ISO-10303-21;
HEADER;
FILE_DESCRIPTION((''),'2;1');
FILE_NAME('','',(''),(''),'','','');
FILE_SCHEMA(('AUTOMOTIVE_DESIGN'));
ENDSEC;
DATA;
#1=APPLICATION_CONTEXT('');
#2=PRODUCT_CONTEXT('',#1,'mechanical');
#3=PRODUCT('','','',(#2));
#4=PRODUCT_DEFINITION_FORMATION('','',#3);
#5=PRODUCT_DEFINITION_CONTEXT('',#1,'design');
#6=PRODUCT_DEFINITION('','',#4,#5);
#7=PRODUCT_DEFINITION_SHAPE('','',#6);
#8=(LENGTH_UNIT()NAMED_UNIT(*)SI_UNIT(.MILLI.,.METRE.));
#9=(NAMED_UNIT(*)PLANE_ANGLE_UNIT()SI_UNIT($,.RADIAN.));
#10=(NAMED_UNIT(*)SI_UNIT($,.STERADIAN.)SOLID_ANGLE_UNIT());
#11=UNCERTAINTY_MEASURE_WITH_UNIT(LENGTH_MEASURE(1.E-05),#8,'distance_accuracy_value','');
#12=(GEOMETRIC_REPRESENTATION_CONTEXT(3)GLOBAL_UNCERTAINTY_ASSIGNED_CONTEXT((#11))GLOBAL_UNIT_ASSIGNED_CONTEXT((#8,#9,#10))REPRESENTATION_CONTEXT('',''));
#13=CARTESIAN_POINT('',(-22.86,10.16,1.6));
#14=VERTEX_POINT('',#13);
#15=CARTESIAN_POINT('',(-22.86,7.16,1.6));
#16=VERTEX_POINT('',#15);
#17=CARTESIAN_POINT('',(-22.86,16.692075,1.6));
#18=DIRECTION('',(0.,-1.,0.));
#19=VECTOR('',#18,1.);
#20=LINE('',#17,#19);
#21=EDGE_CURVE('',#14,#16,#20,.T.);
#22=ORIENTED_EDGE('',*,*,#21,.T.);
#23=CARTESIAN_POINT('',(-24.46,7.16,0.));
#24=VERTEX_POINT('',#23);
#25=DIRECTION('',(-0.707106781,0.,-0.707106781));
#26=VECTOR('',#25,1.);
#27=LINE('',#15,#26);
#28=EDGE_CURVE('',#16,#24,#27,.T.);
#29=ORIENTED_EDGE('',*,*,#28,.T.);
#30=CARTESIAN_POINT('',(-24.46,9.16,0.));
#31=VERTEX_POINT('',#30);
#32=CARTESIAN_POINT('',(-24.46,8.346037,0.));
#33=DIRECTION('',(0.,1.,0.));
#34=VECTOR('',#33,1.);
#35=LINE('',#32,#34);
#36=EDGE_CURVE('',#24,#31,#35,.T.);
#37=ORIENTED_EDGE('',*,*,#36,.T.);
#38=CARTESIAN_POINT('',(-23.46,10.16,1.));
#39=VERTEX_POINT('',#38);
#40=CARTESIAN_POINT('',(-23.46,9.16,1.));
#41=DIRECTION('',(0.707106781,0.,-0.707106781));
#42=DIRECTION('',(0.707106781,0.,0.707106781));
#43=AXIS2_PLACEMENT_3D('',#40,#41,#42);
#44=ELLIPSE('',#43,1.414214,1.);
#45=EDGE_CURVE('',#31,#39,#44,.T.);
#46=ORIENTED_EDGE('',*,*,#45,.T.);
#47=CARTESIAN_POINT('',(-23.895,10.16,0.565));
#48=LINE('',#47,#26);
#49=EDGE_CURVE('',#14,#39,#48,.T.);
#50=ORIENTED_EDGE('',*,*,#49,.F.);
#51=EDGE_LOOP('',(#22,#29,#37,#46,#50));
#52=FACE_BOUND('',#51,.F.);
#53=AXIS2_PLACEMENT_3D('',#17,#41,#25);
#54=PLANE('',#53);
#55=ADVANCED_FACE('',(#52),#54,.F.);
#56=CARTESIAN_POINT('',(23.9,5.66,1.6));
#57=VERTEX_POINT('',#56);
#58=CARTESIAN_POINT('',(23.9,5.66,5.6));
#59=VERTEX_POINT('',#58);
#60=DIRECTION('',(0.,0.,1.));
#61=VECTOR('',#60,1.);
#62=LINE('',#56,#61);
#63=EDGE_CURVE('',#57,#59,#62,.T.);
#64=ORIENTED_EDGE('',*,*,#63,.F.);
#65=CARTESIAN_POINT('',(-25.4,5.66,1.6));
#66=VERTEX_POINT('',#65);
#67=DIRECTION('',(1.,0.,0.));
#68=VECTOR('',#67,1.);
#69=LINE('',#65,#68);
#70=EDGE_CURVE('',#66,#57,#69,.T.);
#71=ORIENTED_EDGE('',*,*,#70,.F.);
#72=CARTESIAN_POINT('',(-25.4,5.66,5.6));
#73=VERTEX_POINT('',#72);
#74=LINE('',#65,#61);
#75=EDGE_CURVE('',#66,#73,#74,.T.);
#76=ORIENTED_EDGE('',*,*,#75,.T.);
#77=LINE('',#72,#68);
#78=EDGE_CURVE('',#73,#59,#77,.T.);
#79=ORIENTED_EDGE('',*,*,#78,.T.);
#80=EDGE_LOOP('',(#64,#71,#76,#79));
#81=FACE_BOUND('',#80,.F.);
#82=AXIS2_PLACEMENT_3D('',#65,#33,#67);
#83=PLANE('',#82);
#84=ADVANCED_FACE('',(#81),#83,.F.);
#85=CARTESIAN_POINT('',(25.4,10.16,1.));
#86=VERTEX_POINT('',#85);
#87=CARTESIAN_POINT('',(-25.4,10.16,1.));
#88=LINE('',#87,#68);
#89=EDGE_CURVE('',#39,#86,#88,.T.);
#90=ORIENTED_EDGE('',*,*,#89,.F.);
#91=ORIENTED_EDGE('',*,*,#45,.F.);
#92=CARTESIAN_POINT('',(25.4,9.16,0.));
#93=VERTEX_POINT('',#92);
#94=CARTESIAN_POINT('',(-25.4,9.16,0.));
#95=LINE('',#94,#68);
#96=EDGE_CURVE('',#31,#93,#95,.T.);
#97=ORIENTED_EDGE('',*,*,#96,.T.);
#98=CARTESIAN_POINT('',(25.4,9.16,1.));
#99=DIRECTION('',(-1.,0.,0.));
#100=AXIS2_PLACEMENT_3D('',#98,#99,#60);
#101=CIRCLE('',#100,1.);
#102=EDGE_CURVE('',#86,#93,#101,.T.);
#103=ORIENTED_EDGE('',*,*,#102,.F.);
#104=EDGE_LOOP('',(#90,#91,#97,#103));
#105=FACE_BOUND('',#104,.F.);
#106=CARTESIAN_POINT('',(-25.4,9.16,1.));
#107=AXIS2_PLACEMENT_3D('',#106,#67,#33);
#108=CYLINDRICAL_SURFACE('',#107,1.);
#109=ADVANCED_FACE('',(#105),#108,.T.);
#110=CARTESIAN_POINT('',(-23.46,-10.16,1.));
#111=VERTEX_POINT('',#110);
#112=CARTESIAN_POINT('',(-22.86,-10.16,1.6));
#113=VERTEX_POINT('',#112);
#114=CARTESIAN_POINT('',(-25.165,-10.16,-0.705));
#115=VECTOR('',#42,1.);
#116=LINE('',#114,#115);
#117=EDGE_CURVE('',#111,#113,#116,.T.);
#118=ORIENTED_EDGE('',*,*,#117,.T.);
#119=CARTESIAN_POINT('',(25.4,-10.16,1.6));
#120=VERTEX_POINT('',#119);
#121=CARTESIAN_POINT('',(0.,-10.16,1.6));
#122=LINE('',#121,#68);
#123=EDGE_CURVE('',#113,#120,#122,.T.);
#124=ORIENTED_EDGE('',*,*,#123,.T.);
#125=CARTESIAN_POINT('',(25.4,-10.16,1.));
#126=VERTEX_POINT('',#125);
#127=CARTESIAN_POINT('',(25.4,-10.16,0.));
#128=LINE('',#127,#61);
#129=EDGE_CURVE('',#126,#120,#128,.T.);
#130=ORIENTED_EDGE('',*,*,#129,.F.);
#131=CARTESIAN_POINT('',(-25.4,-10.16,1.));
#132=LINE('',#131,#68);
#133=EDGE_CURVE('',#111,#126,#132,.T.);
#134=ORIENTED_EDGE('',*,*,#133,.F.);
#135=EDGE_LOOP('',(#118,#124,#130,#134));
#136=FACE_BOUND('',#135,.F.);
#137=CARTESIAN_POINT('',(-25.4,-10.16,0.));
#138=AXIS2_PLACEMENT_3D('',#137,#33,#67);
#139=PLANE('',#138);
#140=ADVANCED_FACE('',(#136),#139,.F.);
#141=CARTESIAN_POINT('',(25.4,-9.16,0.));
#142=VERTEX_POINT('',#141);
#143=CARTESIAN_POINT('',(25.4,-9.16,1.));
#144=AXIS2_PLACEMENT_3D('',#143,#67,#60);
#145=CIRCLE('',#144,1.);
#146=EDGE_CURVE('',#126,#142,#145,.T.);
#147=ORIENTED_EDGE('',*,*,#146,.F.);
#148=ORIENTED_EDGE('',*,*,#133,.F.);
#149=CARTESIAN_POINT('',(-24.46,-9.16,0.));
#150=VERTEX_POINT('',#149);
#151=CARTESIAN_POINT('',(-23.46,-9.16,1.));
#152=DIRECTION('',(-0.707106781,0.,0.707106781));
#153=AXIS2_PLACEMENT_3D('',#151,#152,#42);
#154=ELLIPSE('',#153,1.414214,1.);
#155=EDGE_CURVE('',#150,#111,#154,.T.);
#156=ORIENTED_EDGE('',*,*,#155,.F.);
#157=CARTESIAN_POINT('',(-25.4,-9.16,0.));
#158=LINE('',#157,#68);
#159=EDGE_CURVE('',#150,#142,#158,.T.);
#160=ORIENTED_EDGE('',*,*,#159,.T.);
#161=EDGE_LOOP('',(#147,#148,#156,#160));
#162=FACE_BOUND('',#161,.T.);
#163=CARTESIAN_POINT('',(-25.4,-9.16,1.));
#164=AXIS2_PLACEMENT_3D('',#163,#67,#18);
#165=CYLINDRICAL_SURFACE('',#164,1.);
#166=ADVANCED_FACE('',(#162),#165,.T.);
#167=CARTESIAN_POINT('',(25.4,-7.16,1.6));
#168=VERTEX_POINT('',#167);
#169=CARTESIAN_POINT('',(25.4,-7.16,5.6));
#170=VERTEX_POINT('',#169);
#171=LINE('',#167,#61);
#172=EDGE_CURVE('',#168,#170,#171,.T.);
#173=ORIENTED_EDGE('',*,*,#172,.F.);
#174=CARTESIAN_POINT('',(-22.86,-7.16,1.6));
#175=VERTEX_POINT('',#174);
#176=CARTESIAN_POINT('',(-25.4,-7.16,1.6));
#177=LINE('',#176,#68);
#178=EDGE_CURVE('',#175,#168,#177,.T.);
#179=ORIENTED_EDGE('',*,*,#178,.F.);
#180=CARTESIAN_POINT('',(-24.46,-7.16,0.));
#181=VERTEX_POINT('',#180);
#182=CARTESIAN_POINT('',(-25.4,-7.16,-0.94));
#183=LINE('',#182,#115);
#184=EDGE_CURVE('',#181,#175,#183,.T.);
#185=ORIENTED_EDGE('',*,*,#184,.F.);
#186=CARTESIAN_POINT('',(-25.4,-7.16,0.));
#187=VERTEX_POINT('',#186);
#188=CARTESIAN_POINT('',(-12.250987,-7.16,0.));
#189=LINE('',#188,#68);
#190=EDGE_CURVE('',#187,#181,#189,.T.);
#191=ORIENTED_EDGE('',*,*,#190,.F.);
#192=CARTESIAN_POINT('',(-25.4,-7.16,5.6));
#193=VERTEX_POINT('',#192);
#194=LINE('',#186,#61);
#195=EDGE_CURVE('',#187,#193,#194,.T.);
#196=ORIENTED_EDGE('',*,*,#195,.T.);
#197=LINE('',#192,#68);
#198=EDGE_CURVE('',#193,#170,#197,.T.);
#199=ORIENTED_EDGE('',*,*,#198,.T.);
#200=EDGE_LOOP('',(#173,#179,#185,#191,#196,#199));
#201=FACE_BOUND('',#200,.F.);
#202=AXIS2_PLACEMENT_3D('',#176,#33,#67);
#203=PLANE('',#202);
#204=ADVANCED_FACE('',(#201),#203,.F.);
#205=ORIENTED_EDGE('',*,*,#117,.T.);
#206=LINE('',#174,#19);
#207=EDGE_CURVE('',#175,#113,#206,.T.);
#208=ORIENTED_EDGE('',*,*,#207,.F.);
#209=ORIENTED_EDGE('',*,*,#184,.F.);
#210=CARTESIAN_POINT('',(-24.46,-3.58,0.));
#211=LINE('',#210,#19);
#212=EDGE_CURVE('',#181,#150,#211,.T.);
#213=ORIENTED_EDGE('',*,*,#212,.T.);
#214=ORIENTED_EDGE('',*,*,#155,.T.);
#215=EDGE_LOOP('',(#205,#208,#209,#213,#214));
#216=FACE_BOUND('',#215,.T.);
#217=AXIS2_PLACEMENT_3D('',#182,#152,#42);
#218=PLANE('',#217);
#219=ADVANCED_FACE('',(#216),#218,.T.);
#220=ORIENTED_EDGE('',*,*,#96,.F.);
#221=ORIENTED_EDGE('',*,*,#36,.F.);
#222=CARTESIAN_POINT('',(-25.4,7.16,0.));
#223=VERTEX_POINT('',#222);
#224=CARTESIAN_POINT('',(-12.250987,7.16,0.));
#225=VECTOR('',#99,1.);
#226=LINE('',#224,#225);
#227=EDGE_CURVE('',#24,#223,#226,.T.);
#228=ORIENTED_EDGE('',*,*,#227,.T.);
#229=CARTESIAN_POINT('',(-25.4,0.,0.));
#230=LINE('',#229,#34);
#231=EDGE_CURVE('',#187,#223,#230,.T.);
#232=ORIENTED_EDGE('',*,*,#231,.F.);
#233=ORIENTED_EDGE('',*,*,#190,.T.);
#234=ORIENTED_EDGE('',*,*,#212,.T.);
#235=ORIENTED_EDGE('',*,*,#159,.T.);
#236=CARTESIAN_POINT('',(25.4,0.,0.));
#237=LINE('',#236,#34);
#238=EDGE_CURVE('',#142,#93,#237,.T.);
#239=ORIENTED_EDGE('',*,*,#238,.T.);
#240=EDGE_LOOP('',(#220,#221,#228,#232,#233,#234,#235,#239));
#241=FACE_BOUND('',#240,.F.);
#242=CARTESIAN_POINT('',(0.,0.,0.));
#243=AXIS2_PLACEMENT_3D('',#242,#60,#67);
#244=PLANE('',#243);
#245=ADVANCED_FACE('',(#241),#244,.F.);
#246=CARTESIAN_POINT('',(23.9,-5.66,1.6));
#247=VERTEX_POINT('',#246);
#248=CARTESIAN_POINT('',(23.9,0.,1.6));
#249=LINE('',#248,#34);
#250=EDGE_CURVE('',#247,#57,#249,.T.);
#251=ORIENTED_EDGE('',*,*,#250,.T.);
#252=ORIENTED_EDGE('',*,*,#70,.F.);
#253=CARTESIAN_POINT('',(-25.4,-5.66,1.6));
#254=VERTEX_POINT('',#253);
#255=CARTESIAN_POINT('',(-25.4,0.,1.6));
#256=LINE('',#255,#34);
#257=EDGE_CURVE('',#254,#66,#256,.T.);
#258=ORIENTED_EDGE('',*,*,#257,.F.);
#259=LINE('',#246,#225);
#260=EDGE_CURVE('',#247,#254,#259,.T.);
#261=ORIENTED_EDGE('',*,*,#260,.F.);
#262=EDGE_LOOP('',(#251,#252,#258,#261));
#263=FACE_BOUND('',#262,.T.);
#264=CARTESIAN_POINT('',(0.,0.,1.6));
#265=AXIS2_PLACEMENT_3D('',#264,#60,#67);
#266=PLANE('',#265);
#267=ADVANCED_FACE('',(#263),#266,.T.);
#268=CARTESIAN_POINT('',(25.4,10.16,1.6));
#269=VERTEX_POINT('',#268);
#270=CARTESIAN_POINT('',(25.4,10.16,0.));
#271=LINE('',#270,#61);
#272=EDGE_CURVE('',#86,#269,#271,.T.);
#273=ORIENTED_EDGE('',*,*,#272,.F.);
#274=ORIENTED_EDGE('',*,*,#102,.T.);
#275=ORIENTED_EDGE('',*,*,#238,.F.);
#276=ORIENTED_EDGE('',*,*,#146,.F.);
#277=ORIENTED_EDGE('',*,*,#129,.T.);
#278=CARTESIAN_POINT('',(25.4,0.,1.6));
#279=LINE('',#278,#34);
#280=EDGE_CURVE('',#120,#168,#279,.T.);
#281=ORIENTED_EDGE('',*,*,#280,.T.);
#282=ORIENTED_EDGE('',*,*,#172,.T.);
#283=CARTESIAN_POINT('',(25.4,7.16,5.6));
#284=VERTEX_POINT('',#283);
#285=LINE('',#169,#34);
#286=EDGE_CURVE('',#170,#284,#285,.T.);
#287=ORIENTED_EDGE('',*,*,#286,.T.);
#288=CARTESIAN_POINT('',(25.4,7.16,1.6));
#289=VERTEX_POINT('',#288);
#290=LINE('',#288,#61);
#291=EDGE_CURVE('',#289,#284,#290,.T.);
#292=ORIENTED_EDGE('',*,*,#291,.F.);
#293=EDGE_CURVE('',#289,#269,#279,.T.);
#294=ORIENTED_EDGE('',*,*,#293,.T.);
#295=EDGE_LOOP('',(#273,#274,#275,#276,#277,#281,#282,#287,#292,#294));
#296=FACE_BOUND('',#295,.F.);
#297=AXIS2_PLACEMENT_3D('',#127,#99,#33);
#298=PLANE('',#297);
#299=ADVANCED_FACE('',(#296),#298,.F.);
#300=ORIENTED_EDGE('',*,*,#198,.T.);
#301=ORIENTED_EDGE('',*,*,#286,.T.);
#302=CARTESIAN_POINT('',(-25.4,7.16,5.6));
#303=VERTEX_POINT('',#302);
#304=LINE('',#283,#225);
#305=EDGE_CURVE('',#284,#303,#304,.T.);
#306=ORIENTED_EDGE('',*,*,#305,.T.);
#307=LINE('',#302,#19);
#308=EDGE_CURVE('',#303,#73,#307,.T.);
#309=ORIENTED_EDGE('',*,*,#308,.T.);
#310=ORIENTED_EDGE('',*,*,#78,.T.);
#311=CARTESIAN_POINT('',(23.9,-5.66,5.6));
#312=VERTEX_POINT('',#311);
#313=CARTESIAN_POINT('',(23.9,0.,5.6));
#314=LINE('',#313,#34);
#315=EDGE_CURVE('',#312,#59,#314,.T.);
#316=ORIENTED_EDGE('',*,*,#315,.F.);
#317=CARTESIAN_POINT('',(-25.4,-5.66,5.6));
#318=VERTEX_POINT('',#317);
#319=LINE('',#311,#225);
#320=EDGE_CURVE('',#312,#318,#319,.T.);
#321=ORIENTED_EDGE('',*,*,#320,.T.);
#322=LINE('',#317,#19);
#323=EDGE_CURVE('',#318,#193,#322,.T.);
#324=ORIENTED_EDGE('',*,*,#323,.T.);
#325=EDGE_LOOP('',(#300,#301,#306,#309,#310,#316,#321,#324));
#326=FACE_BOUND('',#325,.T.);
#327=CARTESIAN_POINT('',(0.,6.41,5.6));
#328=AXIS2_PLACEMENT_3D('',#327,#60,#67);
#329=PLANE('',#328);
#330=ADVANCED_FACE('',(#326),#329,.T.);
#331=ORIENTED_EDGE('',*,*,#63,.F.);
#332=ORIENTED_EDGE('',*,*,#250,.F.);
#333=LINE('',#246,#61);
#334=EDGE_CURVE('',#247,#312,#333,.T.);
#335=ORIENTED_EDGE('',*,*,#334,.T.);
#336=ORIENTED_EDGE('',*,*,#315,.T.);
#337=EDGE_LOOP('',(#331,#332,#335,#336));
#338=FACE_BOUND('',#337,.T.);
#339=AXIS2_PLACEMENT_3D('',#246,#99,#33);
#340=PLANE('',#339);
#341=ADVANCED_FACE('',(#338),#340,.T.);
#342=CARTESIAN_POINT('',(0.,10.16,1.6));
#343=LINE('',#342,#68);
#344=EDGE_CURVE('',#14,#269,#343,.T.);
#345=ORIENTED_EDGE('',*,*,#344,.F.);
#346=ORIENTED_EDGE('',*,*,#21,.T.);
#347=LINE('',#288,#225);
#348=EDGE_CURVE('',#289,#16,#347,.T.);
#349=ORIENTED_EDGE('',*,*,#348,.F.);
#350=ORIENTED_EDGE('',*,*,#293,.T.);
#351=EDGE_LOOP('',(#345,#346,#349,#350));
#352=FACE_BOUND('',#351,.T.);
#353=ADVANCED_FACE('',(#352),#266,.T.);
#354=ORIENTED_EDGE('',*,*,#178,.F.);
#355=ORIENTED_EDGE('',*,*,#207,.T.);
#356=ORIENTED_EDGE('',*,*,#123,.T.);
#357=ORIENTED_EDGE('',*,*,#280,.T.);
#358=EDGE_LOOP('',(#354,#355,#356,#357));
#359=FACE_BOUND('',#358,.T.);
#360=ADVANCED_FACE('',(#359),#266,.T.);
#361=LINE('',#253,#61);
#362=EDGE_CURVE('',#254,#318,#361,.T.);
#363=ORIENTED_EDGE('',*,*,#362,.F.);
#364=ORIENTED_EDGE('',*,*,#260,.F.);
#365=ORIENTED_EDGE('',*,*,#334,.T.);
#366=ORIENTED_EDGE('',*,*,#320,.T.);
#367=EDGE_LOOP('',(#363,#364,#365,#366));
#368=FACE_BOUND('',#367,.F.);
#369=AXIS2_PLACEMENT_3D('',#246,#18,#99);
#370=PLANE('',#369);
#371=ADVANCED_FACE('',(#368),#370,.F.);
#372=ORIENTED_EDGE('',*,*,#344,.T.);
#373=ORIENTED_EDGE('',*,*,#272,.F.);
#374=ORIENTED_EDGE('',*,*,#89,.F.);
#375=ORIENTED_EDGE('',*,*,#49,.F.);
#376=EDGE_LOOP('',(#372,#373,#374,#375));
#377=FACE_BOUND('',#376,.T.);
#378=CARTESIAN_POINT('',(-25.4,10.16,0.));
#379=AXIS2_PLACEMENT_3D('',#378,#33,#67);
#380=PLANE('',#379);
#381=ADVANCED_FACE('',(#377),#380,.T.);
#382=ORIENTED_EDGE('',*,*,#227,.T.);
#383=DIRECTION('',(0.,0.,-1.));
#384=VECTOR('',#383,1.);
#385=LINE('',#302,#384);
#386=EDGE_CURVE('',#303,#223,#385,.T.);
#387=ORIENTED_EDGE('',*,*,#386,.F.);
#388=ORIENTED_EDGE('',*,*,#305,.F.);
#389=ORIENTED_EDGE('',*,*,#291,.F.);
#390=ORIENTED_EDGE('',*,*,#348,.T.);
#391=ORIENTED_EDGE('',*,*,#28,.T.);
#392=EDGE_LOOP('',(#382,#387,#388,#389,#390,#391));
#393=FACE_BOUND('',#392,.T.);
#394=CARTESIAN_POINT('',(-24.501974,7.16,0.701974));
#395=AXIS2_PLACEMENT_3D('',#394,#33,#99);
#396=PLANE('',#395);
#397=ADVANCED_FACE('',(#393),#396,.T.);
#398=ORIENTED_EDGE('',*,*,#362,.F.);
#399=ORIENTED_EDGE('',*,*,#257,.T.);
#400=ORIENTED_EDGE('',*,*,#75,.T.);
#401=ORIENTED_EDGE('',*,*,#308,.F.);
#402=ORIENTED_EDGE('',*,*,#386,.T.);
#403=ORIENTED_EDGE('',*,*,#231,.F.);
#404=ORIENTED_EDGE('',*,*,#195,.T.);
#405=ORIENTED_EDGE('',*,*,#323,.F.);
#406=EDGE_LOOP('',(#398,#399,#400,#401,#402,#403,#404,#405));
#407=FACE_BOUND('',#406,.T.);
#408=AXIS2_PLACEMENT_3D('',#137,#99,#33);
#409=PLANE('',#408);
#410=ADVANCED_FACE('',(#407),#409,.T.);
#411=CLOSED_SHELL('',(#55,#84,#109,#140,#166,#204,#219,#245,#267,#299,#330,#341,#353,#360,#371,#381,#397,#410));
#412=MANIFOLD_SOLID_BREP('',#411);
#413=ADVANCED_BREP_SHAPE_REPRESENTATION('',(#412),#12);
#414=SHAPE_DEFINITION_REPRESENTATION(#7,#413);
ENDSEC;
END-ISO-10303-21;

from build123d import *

# Parameters (mm, degrees)
F0_W        = 50.8
F0_H        = 20.32
F1_DEPTH    = 1.6
F2_W        = 1.5
F2_H        = 11.32
F3_DEPTH    = 4
F4_R        = 1
F5_T1_DEPTH = 9.5320747894
F5_T3_DEPTH = 9.5320747894


# Not quite as in the source:
# - a fillet or chamfer that OpenCascade refuses, or shapes differently, is made with other operations: its cross-section is extruded or revolved along the edge and cut away or added


with BuildPart() as f1:
    # F0 (on Top) → F1 (new body)
    with BuildSketch(Plane.XY):
        Rectangle(F0_W, F0_H)
    extrude(amount=F1_DEPTH)

    # F2 (on face) → F3 (join)
    with BuildSketch(Plane.XY.offset(1.6)):
        Polygon((25.4, 7.16), (-25.4, 7.16), (-25.4, 5.66), (23.9, 5.66), (25.4, 5.66), align=None)
        with Locations((24.65, 0)):
            Rectangle(F2_W, F2_H)
        Polygon((25.4, -7.16), (25.4, -5.66), (23.9, -5.66), (-25.4, -5.66), (-25.4, -7.16), align=None)
    extrude(amount=F3_DEPTH)

    # F4
    f4_edges = [f1.edges().sort_by_distance(p)[0] for p in [
        (0, -10.16, 0),
        (0, 10.16, 0),
    ]]
    fillet(f4_edges, radius=F4_R)

    # F5: chamfer of 2.54 on 2 edges, made by hand

    # F5_s2 → F5_t1 (cut)
    with BuildSketch(Plane.XZ.offset(-16.6920747894)):
        Polygon((-22.86, 1.6), (-25.4, -0.94), (-25.4, 1.6), align=None)
    extrude(amount=F5_T1_DEPTH, mode=Mode.SUBTRACT)

    # F5_s4 → F5_t3 (cut)
    with BuildSketch(Plane.XZ.offset(7.16)):
        Polygon((-25.4, -0.94), (-22.86, 1.6), (-25.4, 1.6), align=None)
    extrude(amount=F5_T3_DEPTH, mode=Mode.SUBTRACT)


solid = f1.part
